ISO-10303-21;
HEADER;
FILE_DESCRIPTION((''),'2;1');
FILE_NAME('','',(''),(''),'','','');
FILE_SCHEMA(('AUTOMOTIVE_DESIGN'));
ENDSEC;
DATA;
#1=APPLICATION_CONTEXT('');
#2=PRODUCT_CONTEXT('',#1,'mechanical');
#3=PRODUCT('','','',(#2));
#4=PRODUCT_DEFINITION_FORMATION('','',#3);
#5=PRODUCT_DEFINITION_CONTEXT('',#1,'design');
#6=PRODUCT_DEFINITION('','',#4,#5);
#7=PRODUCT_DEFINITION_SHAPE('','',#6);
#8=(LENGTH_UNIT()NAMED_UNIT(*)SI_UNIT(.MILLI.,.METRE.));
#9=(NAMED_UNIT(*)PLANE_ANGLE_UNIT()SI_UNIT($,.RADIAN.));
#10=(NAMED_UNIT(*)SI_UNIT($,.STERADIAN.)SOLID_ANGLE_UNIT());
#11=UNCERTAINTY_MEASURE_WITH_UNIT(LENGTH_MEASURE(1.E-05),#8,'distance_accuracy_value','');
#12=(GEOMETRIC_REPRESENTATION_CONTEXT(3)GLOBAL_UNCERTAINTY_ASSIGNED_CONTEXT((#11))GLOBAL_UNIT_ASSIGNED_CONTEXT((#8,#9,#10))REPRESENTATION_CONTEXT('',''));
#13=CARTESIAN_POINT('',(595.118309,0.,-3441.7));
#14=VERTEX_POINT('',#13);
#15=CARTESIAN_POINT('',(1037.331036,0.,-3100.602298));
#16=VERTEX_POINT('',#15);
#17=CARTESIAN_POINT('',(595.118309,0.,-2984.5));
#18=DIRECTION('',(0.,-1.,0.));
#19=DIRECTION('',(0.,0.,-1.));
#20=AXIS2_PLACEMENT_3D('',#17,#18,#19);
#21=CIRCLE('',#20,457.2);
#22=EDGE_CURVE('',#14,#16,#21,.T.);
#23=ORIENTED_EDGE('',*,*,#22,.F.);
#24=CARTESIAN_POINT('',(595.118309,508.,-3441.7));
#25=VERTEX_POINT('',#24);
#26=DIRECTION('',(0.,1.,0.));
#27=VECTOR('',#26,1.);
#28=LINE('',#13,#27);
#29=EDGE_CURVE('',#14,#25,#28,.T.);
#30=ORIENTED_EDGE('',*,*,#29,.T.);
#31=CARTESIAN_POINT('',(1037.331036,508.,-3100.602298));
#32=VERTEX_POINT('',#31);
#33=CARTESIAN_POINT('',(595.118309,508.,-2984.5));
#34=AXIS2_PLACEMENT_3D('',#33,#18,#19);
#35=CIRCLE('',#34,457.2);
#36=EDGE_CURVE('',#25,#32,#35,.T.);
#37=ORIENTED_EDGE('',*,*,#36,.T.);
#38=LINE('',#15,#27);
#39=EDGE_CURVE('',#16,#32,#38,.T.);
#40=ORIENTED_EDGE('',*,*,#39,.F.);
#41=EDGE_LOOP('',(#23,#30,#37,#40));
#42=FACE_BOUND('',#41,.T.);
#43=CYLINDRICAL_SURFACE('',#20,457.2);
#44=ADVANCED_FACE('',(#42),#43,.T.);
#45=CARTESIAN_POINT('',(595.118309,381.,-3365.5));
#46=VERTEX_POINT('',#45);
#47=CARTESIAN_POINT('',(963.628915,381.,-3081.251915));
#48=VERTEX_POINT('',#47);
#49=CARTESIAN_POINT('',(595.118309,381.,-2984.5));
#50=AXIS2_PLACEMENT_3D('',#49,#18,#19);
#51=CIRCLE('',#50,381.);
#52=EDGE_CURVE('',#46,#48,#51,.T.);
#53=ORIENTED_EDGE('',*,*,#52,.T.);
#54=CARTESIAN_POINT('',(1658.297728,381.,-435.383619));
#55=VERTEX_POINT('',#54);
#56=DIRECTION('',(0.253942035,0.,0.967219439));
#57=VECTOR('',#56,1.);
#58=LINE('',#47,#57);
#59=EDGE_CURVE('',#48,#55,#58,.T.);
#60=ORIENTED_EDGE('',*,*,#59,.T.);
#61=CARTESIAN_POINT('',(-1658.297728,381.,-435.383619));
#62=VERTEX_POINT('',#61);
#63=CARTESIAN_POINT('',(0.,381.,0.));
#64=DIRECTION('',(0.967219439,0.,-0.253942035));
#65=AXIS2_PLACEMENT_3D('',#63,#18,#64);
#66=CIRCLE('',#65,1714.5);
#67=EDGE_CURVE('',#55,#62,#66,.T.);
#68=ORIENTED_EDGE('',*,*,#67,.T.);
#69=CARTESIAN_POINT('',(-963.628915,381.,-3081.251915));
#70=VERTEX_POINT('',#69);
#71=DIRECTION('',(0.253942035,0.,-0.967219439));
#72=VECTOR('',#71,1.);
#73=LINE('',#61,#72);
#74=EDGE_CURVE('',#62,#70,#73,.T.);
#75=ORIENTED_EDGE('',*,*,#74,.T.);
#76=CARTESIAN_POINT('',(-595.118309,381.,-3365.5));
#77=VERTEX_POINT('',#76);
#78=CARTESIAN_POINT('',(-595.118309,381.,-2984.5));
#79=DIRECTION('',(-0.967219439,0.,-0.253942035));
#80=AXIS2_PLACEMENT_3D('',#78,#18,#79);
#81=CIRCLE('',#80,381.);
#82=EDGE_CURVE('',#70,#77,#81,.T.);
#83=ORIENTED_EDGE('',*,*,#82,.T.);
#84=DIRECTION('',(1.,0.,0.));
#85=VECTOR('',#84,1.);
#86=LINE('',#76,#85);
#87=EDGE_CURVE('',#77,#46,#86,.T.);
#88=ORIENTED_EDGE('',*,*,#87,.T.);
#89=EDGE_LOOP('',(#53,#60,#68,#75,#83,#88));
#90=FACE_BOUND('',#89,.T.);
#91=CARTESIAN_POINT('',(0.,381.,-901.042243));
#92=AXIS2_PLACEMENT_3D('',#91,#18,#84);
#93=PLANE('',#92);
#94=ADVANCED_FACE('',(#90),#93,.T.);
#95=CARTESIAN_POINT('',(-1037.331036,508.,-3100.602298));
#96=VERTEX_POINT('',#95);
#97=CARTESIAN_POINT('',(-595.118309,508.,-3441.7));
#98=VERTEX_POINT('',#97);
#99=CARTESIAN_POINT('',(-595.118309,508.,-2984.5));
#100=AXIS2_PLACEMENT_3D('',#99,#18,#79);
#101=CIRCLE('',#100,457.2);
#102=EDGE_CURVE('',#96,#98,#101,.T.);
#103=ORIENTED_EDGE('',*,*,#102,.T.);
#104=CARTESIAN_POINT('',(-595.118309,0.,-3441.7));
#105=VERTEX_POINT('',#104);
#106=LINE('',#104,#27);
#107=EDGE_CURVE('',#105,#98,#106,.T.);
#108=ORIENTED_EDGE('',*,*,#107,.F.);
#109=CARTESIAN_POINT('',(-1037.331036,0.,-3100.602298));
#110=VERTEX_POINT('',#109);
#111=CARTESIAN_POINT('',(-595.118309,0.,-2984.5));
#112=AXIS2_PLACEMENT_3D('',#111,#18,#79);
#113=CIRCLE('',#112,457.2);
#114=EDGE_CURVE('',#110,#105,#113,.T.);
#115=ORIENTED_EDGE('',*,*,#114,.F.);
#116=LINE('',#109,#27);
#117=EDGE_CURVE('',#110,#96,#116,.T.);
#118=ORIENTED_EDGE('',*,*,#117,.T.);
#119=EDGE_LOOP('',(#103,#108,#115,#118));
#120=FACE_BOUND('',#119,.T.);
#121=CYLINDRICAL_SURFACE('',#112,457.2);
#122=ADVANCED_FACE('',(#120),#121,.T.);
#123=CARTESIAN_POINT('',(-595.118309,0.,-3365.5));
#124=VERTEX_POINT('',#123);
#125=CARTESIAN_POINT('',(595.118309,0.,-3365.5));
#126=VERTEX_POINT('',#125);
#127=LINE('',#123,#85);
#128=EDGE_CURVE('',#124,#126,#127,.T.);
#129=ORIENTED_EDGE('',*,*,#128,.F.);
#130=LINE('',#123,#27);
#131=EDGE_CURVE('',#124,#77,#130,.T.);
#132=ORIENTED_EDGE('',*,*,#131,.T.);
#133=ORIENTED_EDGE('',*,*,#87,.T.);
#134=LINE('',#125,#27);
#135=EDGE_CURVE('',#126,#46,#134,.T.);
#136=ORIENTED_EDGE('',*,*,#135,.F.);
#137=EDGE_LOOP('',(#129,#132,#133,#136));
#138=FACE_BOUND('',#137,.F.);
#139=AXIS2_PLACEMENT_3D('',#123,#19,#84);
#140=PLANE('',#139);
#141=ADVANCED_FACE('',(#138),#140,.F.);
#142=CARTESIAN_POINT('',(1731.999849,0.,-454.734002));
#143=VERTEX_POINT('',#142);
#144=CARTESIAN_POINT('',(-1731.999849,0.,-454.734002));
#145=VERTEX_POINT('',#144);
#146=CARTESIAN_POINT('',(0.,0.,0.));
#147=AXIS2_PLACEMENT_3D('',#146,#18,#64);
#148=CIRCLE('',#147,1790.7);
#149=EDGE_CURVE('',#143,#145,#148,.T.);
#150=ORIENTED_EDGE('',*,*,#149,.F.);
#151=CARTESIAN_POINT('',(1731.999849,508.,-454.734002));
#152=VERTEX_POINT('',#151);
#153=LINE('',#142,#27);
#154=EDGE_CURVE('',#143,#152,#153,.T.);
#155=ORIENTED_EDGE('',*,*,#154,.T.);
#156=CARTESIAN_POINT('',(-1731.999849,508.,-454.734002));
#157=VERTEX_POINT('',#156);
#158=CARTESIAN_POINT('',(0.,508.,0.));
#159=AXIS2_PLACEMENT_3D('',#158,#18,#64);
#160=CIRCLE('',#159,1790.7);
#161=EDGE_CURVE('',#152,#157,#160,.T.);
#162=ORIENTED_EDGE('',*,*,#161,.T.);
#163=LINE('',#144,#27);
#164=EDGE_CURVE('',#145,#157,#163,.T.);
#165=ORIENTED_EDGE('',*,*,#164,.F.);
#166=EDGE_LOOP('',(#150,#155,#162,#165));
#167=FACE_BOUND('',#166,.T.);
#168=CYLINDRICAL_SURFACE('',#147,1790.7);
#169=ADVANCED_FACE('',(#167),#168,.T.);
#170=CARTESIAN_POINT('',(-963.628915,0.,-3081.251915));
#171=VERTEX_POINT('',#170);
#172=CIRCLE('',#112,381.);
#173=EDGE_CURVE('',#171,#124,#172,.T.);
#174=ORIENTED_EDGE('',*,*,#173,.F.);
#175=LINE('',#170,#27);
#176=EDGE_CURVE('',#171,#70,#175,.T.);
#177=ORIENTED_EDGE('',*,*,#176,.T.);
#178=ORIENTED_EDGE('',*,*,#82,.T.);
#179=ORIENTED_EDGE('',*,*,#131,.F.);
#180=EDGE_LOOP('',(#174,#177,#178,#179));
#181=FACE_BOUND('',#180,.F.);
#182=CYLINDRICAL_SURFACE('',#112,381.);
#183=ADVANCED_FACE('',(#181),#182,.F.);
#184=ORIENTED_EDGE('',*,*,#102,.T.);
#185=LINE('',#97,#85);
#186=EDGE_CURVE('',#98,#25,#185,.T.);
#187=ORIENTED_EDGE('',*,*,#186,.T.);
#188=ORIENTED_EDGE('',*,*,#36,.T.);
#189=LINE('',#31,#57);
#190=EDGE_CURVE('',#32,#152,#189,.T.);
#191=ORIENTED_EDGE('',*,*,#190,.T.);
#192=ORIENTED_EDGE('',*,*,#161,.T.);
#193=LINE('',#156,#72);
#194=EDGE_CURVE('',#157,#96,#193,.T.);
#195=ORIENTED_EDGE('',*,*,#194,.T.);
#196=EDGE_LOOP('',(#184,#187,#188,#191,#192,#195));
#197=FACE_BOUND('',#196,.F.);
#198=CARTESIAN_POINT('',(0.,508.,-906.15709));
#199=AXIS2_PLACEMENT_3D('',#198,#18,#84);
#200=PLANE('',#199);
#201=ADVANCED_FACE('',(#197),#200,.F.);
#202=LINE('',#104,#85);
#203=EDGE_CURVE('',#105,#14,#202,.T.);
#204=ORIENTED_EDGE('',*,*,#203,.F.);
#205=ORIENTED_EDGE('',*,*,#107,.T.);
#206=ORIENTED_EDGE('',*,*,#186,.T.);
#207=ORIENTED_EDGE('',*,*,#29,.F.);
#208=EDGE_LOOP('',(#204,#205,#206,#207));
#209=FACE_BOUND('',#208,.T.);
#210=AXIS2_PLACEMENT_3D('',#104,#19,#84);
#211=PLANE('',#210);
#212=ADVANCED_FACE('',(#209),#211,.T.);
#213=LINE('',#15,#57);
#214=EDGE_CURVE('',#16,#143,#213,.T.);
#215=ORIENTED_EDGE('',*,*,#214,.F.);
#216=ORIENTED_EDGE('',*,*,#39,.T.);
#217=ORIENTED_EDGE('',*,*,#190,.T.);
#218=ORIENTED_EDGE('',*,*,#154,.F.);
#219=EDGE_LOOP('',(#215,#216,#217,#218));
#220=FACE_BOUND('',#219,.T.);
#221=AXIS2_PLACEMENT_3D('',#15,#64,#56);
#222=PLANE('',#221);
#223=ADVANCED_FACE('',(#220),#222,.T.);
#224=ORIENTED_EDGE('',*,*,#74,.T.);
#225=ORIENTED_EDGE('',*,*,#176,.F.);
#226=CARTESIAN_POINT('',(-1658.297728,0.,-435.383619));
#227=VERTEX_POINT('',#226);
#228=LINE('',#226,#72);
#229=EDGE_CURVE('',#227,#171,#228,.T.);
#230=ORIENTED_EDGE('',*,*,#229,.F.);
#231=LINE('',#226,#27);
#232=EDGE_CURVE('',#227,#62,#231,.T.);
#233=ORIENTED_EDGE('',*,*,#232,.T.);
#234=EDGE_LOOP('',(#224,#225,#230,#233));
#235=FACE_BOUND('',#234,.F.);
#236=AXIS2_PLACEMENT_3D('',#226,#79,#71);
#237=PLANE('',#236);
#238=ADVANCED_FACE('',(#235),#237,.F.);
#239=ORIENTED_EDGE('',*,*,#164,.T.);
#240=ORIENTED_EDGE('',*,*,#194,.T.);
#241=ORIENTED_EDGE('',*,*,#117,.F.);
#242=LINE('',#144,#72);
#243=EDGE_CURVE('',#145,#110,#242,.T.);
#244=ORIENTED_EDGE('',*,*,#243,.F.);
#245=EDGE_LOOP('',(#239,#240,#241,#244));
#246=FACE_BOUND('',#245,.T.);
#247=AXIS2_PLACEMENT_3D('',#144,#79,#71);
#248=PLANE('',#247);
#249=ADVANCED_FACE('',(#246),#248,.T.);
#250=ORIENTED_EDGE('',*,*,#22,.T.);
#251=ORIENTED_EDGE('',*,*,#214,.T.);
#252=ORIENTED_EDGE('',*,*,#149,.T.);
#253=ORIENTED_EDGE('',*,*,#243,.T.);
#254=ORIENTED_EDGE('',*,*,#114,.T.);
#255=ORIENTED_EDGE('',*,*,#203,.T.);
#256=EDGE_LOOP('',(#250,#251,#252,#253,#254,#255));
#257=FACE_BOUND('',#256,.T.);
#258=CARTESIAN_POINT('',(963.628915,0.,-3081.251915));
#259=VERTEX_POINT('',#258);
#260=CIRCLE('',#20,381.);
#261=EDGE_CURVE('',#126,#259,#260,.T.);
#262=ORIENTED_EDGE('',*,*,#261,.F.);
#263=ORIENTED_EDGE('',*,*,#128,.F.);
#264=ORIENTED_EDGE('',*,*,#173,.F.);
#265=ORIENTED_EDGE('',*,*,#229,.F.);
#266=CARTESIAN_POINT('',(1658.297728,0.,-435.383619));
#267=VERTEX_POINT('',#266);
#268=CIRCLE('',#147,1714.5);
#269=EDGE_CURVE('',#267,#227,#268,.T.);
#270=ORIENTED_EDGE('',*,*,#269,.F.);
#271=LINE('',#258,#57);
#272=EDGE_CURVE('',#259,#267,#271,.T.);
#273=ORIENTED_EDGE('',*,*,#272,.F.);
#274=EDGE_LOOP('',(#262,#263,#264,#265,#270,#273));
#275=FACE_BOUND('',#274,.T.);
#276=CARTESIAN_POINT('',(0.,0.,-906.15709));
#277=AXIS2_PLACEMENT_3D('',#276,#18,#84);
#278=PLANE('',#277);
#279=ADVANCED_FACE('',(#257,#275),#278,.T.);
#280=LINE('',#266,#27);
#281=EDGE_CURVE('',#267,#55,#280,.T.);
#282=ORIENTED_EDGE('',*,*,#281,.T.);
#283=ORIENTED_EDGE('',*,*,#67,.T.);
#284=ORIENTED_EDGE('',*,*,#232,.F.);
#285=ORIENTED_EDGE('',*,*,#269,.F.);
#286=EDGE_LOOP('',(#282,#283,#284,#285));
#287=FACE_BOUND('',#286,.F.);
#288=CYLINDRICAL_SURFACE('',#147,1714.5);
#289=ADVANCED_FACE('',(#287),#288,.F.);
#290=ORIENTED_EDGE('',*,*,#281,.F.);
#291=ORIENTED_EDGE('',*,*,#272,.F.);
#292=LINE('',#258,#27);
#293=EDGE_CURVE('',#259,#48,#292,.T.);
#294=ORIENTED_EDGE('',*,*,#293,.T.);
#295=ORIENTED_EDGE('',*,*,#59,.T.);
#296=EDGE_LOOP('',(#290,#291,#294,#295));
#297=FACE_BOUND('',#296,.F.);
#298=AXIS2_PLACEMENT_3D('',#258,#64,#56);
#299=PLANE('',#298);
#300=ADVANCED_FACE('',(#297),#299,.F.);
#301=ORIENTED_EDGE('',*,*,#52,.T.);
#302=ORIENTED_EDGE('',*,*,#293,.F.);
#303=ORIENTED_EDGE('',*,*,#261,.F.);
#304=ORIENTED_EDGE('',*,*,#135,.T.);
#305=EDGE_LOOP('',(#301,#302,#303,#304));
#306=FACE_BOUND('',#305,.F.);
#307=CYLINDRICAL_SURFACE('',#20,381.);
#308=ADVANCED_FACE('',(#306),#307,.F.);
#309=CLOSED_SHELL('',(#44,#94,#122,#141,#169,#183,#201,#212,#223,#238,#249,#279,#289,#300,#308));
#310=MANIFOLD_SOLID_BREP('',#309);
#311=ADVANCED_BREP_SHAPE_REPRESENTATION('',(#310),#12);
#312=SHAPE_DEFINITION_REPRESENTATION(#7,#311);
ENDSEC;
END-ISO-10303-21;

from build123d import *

# Parameters (mm, degrees)
F1_DEPTH = 508
F2_DEPTH = 381


# Not quite as in the source:
# - a feature of the source that left no trace in its solid (it failed there, or was rolled back) is left out


with BuildPart() as f1:
    # F0 (on Front) → F1 (new body)
    with BuildSketch(Plane.XZ):
        with BuildLine():
            Line((1456.3986319797, -1504.4493615516), (1731.9998491091, -454.7340021221))
            ThreePointArc((1731.9998491091, -454.7340021221), (0, 1790.7), (-1731.9998491091, -454.7340021221))
            Line((-1731.9998491091, -454.7340021221), (-1456.3986319797, -1504.4493615516))
            Line((-1456.3986319797, -1504.4493615516), (-1356.3676447382, -1885.4493615516))
            Line((-1356.3676447382, -1885.4493615516), (-1156.3056702552, -2647.4493615516))
            Line((-1156.3056702552, -2647.4493615516), (-1056.2746830137, -3028.4493615516))
            Line((-1056.2746830137, -3028.4493615516), (-1037.3310360144, -3100.6022984142))
            ThreePointArc((-1037.3310360144, -3100.6022984142), (-874.3582315562, -3346.5178247234), (-595.1183085823, -3441.7))
            Line((-595.1183085823, -3441.7), (595.1183085823, -3441.7))
            ThreePointArc((595.1183085823, -3441.7), (874.3582315562, -3346.5178247234), (1037.3310360144, -3100.6022984142))
            Line((1037.3310360144, -3100.6022984142), (1056.2746830137, -3028.4493615516))
            Line((1056.2746830137, -3028.4493615516), (1156.3056702552, -2647.4493615516))
            Line((1156.3056702552, -2647.4493615516), (1356.3676447382, -1885.4493615516))
            Line((1356.3676447382, -1885.4493615516), (1456.3986319797, -1504.4493615516))
        make_face()
        with BuildLine():
            ThreePointArc((-1658.2977278704, -435.3836190531), (0, 1714.5), (1658.2977278704, -435.3836190531))
            Line((1658.2977278704, -435.3836190531), (963.6289147757, -3081.2519153451))
            ThreePointArc((963.6289147757, -3081.2519153451), (827.8182443939, -3286.1815206028), (595.1183085823, -3365.5))
            Line((595.1183085823, -3365.5), (-595.1183085823, -3365.5))
            ThreePointArc((-595.1183085823, -3365.5), (-827.8182443939, -3286.1815206028), (-963.6289147757, -3081.2519153451))
            Line((-963.6289147757, -3081.2519153451), (-1658.2977278704, -435.3836190531))
        make_face(mode=Mode.SUBTRACT)
        with BuildLine():
            Line((963.6289147757, -3081.2519153451), (1658.2977278704, -435.3836190531))
            ThreePointArc((1658.2977278704, -435.3836190531), (0, 1714.5), (-1658.2977278704, -435.3836190531))
            Line((-1658.2977278704, -435.3836190531), (-963.6289147757, -3081.2519153451))
            ThreePointArc((-963.6289147757, -3081.2519153451), (-827.8182443939, -3286.1815206028), (-595.1183085823, -3365.5))
            Line((-595.1183085823, -3365.5), (595.1183085823, -3365.5))
            ThreePointArc((595.1183085823, -3365.5), (827.8182443939, -3286.1815206028), (963.6289147757, -3081.2519153451))
        make_face()
    extrude(amount=-F1_DEPTH)

    # F0 (on Front) → F2 (cut)
    with BuildSketch(Plane.XZ):
        with BuildLine():
            Line((963.6289147757, -3081.2519153451), (1658.2977278704, -435.3836190531))
            ThreePointArc((1658.2977278704, -435.3836190531), (0, 1714.5), (-1658.2977278704, -435.3836190531))
            Line((-1658.2977278704, -435.3836190531), (-963.6289147757, -3081.2519153451))
            ThreePointArc((-963.6289147757, -3081.2519153451), (-827.8182443939, -3286.1815206028), (-595.1183085823, -3365.5))
            Line((-595.1183085823, -3365.5), (595.1183085823, -3365.5))
            ThreePointArc((595.1183085823, -3365.5), (827.8182443939, -3286.1815206028), (963.6289147757, -3081.2519153451))
        make_face()
    extrude(amount=-F2_DEPTH, mode=Mode.SUBTRACT)


solid = f1.part
